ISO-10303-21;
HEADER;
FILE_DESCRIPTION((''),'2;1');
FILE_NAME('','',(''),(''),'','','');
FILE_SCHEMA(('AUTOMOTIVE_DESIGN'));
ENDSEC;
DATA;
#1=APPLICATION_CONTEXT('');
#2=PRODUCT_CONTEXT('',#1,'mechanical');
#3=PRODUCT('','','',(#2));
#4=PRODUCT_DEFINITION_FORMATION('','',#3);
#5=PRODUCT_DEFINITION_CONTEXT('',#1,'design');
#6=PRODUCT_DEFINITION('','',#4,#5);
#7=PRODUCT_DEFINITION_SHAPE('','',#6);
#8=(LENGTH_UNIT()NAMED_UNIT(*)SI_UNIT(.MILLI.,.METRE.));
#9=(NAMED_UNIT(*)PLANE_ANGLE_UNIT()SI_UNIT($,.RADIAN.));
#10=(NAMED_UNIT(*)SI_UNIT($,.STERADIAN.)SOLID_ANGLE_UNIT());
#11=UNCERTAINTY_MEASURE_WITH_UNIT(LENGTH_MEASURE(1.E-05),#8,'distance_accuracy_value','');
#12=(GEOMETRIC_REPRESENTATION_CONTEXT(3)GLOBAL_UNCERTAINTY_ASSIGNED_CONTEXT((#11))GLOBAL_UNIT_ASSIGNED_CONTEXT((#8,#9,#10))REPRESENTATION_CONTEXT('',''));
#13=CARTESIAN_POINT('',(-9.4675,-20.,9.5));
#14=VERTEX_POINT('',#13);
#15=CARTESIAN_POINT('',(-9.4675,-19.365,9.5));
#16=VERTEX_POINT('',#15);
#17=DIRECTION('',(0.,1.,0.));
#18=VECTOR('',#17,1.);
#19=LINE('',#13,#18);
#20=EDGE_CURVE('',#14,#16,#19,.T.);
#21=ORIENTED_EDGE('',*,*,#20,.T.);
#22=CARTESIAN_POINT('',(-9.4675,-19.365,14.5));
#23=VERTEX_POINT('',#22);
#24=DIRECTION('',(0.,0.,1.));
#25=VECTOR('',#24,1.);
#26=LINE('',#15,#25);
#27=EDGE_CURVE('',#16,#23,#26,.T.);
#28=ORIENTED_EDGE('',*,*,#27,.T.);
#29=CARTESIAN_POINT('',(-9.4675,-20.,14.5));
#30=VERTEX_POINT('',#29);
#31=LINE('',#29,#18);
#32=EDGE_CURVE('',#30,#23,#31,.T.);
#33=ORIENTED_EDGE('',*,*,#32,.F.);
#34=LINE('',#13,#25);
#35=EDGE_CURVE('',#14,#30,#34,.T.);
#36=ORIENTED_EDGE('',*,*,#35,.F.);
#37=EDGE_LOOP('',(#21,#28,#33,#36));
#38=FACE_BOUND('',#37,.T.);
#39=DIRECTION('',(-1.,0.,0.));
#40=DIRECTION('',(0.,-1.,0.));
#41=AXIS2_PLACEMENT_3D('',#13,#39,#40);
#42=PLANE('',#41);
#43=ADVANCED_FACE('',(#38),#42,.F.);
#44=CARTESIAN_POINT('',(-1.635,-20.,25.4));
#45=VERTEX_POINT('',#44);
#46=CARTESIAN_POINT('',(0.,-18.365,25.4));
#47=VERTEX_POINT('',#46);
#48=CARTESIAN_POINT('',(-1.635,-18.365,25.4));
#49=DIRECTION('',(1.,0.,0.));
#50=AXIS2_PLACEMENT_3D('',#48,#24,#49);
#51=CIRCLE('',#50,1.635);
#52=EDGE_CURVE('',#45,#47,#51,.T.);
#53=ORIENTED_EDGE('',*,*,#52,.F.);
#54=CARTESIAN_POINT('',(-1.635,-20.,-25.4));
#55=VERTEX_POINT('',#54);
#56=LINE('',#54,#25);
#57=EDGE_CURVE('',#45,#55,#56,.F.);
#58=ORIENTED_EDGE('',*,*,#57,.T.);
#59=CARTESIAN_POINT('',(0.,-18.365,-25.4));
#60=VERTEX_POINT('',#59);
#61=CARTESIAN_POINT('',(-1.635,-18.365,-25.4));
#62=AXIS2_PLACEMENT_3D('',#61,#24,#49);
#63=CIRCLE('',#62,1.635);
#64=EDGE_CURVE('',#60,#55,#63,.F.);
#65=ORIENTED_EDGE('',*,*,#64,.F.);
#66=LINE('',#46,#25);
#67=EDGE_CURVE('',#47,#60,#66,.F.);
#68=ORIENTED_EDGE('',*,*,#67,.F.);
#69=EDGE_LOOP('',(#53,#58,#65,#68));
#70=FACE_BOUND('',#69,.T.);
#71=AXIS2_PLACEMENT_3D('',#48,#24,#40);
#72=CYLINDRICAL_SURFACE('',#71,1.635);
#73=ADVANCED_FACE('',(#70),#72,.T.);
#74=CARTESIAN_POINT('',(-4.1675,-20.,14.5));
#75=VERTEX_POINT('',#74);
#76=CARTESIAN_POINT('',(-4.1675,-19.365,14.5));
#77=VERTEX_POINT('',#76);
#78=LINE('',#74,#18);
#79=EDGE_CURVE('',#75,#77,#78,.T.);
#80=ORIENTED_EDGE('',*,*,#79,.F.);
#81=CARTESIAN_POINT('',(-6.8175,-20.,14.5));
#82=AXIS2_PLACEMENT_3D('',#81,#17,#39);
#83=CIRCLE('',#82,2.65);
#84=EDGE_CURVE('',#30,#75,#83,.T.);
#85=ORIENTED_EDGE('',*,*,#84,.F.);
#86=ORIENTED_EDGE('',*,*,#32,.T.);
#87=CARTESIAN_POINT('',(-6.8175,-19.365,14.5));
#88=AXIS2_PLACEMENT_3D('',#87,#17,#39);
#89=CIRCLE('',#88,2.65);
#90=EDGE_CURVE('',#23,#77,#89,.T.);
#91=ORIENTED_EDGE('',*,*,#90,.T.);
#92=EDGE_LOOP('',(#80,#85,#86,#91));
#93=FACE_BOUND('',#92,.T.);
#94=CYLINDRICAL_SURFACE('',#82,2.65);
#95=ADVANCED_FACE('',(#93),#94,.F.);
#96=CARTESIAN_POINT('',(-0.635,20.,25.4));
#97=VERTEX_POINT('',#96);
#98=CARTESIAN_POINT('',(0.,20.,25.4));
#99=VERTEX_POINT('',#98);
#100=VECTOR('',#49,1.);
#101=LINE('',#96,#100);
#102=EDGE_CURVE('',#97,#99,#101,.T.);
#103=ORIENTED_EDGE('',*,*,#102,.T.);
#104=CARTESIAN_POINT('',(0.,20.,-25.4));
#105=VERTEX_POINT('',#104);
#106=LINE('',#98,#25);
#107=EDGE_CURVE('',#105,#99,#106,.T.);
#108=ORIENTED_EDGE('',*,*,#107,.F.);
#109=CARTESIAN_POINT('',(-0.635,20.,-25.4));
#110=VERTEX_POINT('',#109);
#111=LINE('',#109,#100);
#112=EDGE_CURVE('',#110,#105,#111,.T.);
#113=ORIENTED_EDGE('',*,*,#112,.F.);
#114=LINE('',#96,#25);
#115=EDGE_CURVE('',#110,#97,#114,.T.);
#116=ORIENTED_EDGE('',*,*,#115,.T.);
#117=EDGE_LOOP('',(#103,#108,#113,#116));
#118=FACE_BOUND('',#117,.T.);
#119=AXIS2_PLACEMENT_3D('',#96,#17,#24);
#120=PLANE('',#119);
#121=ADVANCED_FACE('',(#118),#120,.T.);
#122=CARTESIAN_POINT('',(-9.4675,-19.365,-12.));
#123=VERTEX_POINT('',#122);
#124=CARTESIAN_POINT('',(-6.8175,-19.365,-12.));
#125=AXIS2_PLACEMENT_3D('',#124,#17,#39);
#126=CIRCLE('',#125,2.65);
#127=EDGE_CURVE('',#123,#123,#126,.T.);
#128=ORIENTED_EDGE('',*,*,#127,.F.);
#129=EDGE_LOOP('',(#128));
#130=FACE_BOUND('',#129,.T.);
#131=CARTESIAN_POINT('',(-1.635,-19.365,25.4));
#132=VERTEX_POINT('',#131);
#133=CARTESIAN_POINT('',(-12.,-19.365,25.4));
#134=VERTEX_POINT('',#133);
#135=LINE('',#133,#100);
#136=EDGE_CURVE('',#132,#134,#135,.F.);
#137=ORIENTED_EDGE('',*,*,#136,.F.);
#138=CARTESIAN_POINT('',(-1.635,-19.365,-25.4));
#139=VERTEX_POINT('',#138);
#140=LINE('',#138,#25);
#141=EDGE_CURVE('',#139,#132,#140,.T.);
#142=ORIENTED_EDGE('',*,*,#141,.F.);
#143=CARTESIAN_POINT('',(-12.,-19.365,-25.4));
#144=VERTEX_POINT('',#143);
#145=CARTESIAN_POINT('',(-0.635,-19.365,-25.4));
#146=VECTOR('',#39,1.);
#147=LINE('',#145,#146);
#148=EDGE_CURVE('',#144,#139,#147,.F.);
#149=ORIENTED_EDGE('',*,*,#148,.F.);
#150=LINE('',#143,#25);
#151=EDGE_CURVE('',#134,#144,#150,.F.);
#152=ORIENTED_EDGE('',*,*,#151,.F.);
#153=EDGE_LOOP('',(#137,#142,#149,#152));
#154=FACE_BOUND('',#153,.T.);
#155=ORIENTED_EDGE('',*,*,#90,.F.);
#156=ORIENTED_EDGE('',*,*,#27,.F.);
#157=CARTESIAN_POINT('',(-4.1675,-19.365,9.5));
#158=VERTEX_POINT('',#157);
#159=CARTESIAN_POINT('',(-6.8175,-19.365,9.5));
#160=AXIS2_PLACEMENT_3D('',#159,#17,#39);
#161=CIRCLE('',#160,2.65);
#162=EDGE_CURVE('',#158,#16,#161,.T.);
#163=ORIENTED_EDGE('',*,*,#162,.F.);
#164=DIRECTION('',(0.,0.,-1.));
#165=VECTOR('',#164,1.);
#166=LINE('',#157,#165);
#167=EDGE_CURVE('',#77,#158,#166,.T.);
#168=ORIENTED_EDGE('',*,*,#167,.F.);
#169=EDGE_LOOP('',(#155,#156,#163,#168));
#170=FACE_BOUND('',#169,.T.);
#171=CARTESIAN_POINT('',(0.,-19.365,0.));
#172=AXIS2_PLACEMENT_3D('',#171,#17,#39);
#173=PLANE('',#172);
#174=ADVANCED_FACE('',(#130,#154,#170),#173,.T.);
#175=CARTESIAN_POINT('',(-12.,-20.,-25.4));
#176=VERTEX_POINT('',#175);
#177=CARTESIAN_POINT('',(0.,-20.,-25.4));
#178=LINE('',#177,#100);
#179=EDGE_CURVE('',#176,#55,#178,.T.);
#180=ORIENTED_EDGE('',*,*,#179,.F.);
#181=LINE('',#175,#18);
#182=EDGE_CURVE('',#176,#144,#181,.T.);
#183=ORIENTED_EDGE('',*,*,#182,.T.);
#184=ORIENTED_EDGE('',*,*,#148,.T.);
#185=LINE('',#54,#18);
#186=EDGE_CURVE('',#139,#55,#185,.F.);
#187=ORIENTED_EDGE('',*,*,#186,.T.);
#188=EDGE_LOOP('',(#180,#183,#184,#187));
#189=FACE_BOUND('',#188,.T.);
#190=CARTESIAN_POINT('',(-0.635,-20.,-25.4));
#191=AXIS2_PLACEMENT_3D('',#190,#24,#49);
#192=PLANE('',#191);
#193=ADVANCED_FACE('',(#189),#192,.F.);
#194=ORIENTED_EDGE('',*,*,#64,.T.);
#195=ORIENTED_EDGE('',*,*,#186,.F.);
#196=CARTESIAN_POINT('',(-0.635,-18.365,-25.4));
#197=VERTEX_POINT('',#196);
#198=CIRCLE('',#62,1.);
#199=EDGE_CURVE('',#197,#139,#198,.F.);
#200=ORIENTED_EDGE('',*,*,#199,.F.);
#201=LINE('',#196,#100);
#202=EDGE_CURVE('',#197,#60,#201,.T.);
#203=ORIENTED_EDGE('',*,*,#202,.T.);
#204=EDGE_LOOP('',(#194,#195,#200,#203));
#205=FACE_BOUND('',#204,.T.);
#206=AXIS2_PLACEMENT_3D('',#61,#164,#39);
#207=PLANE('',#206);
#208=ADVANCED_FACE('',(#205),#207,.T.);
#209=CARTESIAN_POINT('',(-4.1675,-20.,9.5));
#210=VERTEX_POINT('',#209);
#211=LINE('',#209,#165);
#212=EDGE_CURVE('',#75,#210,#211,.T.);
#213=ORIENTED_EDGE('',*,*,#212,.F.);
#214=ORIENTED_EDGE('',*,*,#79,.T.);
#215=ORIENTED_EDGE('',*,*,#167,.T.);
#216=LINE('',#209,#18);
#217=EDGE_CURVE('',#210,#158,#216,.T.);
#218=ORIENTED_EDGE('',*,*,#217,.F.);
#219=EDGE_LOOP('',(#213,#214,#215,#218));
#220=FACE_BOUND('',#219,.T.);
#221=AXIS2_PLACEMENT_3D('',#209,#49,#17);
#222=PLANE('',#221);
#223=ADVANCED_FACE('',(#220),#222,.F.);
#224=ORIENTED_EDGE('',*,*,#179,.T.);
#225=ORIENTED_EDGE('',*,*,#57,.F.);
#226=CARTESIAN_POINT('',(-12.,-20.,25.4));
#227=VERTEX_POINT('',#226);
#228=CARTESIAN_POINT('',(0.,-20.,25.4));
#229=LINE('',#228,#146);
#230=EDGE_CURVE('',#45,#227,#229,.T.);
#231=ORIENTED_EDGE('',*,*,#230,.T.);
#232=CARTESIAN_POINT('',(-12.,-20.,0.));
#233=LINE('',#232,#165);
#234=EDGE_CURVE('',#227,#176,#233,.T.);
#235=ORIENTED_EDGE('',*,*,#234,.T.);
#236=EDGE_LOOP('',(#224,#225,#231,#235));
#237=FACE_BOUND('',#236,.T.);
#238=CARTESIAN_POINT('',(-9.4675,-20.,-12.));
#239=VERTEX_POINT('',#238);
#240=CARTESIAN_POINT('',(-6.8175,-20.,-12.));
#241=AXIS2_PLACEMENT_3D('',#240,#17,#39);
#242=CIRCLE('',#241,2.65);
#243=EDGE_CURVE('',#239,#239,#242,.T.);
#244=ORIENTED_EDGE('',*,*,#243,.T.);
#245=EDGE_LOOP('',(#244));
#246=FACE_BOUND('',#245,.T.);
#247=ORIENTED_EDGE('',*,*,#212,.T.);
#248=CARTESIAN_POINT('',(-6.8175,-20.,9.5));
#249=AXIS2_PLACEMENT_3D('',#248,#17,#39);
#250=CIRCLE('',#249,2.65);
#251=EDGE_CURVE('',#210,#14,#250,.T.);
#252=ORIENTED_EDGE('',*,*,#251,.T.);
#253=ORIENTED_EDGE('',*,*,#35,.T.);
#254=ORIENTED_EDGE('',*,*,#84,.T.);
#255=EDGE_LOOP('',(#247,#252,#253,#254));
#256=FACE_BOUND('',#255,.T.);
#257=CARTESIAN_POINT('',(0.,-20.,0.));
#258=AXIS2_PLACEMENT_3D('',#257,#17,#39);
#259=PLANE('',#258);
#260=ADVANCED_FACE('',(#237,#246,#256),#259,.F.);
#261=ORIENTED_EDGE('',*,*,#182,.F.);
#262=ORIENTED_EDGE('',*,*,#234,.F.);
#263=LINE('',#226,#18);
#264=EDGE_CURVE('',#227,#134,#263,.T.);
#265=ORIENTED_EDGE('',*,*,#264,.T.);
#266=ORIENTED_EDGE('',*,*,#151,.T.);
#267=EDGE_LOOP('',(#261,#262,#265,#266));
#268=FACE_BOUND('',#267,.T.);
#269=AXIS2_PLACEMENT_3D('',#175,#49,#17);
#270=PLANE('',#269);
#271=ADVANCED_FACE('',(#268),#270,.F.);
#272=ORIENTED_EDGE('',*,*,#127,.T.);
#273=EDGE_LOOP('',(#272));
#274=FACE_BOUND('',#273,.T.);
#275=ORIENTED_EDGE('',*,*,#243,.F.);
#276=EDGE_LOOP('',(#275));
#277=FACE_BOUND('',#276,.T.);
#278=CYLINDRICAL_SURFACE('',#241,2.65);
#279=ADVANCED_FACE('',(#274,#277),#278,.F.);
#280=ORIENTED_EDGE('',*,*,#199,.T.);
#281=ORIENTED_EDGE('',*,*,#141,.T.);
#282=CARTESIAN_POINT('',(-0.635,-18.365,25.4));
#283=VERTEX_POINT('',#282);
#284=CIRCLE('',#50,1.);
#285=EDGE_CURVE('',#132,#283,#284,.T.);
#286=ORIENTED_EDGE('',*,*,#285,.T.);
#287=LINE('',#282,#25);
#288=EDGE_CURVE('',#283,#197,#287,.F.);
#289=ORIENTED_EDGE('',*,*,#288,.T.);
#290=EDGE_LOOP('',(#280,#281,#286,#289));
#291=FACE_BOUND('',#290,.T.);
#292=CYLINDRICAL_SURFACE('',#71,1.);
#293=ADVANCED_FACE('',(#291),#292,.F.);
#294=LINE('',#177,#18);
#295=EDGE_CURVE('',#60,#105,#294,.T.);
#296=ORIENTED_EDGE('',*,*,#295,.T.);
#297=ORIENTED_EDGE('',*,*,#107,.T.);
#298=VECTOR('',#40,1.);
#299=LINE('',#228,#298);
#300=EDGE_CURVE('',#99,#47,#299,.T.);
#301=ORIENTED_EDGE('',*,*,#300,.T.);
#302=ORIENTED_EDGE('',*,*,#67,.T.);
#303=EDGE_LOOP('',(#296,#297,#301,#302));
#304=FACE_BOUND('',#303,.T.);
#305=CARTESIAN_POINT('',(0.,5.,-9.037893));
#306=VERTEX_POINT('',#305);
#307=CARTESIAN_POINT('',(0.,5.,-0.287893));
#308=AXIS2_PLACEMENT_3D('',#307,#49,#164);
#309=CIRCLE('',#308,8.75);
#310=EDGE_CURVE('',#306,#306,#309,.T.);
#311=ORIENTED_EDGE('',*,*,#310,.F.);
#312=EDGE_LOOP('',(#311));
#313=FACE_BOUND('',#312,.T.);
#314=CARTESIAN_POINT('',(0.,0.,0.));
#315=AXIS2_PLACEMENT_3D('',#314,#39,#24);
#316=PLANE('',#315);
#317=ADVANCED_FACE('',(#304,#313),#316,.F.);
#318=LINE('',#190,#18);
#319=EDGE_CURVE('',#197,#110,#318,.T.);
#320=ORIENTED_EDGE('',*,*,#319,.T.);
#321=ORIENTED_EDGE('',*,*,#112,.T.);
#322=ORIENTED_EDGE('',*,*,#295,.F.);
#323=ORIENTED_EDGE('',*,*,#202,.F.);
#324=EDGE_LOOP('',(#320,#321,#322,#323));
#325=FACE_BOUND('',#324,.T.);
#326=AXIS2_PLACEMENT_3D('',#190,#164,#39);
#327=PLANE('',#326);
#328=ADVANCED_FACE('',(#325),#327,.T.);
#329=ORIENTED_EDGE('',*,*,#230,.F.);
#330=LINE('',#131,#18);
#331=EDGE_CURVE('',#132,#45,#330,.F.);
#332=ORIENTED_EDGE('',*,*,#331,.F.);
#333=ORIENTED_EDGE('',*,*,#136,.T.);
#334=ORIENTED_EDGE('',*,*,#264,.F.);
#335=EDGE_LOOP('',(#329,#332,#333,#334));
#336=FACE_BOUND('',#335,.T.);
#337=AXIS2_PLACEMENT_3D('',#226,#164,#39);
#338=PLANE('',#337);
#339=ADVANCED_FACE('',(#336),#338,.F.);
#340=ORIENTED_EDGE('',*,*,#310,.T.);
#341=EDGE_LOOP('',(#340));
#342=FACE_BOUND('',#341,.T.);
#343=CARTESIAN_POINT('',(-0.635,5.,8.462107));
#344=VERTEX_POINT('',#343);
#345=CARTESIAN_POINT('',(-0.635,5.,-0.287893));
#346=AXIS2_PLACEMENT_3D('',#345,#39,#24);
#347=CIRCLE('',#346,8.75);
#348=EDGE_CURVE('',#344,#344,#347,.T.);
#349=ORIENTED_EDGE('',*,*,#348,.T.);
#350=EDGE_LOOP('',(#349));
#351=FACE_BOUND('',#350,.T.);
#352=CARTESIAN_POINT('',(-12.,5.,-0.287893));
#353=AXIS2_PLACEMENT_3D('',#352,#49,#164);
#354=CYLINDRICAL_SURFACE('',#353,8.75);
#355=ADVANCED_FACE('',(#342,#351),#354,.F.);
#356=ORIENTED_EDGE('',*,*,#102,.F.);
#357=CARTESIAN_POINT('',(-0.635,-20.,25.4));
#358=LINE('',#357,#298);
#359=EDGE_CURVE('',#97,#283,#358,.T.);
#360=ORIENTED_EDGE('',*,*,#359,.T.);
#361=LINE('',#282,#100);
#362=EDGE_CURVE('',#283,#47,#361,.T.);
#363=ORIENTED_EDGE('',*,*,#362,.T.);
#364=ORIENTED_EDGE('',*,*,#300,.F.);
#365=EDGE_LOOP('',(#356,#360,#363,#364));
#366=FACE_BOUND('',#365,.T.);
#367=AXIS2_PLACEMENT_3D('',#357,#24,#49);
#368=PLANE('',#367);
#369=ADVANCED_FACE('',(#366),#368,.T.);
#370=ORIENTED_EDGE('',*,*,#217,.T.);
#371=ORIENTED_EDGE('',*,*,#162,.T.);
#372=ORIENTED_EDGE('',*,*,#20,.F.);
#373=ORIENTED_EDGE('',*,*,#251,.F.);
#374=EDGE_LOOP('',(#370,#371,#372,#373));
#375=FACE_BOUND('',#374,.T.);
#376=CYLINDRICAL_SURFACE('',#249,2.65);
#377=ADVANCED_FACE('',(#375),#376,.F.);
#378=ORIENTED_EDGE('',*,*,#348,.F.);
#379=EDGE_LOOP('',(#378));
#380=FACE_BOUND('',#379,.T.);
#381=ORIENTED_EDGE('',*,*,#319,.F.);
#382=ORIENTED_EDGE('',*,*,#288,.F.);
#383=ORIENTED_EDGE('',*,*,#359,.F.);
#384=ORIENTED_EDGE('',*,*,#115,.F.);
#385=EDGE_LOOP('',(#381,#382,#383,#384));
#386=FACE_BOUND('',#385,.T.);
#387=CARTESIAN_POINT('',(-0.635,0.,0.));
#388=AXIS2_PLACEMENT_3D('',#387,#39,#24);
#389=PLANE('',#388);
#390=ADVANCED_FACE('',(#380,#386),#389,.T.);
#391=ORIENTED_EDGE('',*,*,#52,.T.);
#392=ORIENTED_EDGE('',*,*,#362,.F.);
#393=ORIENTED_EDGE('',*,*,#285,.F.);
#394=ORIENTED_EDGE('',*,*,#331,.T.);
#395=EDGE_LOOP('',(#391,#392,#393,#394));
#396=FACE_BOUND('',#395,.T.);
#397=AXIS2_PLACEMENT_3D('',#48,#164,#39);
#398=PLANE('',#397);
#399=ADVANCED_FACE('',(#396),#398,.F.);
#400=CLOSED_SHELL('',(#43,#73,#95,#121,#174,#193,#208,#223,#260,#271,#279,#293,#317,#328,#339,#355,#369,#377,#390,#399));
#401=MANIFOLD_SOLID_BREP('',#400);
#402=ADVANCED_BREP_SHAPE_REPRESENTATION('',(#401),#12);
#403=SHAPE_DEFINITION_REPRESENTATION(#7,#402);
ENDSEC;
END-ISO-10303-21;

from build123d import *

# Parameters (mm, degrees)
SKETCH1_W                    = 50.8
SKETCH1_H                    = 40
BASE_FLANGE1_DEPTH           = 0.635
EDGE_FLANGE1_STRIP_W         = 4.54
EDGE_FLANGE1_STRIP_H         = 0.635
EDGE_FLANGE1_STRIP_CUT_DEPTH = 50.8
EDGE_FLANGE1_DEPTH           = 50.8
SKETCH9_R                    = 8.75
CUT_EXTRUDE1_DEPTH           = 35.48419928
SKETCH10_R                   = 2.65
CUT_EXTRUDE2_DEPTH           = 49.360761212


# Sheet-metal steps are written as plain solids
with BuildPart() as part:
    # Sketch1 → Base-Flange1 (new body)
    with BuildSketch(Plane(origin=(0, 0, 0), x_dir=(0, 0, -1), z_dir=(1, 0, 0))):
        Rectangle(SKETCH1_W, SKETCH1_H)
    extrude(amount=-BASE_FLANGE1_DEPTH)

    # Edge-Flange1 strip (across the edge) → Edge-Flange1 strip cut (cut)
    with BuildSketch(Plane(origin=(-0.635, -20, -25.4), x_dir=(0, 1, 0), z_dir=(0, 0, 1))):
        with Locations((-0.635, -0.3175)):
            Rectangle(EDGE_FLANGE1_STRIP_W, EDGE_FLANGE1_STRIP_H)
    extrude(amount=EDGE_FLANGE1_STRIP_CUT_DEPTH, mode=Mode.SUBTRACT)

    # Edge-Flange1 section (across the edge) → Edge-Flange1 (add)
    with BuildSketch(Plane(origin=(-0.635, -20, -25.4), x_dir=(0, 1, 0), z_dir=(0, 0, 1))):
        with BuildLine():
            Line((0, 1), (0, 11.365))
            Line((0, 11.365), (0.635, 11.365))
            Line((0.635, 11.365), (0.635, 1))
            ThreePointArc((0.635, 1), (0.927893219, 0.292893219), (1.635, 0))
            Line((1.635, 0), (1.635, -0.635))
            ThreePointArc((1.635, -0.635), (0.478880413, -0.156119587), (0, 1))
        make_face()
    extrude(amount=EDGE_FLANGE1_DEPTH)

    # Sketch9 → Cut-Extrude1 (cut, through all)
    with BuildSketch(Plane(origin=(0, 0, 0), x_dir=(0, 0, -1), z_dir=(1, 0, 0))):
        with Locations((0.287892683, 5)):
            Circle(SKETCH9_R)
    extrude(amount=-CUT_EXTRUDE1_DEPTH, mode=Mode.SUBTRACT)

    # Sketch10 → Cut-Extrude2 (cut, through all)
    with BuildSketch(Plane(origin=(0, -19.365, 0), x_dir=(1, 0, 0), z_dir=(0, 1, 0))):
        with Locations(Location((-6.8175, 12, 0), (0, 0, 180))):
            Circle(SKETCH10_R)
        with BuildLine():
            Line((-4.1675, -9.5), (-4.1675, -14.5))
            ThreePointArc((-4.1675, -14.5), (-6.8175, -17.15), (-9.4675, -14.5))
            Line((-9.4675, -14.5), (-9.4675, -9.5))
            ThreePointArc((-9.4675, -9.5), (-6.8175, -6.85), (-4.1675, -9.5))
        make_face()
    extrude(amount=-CUT_EXTRUDE2_DEPTH, mode=Mode.SUBTRACT)


solid = part.part
